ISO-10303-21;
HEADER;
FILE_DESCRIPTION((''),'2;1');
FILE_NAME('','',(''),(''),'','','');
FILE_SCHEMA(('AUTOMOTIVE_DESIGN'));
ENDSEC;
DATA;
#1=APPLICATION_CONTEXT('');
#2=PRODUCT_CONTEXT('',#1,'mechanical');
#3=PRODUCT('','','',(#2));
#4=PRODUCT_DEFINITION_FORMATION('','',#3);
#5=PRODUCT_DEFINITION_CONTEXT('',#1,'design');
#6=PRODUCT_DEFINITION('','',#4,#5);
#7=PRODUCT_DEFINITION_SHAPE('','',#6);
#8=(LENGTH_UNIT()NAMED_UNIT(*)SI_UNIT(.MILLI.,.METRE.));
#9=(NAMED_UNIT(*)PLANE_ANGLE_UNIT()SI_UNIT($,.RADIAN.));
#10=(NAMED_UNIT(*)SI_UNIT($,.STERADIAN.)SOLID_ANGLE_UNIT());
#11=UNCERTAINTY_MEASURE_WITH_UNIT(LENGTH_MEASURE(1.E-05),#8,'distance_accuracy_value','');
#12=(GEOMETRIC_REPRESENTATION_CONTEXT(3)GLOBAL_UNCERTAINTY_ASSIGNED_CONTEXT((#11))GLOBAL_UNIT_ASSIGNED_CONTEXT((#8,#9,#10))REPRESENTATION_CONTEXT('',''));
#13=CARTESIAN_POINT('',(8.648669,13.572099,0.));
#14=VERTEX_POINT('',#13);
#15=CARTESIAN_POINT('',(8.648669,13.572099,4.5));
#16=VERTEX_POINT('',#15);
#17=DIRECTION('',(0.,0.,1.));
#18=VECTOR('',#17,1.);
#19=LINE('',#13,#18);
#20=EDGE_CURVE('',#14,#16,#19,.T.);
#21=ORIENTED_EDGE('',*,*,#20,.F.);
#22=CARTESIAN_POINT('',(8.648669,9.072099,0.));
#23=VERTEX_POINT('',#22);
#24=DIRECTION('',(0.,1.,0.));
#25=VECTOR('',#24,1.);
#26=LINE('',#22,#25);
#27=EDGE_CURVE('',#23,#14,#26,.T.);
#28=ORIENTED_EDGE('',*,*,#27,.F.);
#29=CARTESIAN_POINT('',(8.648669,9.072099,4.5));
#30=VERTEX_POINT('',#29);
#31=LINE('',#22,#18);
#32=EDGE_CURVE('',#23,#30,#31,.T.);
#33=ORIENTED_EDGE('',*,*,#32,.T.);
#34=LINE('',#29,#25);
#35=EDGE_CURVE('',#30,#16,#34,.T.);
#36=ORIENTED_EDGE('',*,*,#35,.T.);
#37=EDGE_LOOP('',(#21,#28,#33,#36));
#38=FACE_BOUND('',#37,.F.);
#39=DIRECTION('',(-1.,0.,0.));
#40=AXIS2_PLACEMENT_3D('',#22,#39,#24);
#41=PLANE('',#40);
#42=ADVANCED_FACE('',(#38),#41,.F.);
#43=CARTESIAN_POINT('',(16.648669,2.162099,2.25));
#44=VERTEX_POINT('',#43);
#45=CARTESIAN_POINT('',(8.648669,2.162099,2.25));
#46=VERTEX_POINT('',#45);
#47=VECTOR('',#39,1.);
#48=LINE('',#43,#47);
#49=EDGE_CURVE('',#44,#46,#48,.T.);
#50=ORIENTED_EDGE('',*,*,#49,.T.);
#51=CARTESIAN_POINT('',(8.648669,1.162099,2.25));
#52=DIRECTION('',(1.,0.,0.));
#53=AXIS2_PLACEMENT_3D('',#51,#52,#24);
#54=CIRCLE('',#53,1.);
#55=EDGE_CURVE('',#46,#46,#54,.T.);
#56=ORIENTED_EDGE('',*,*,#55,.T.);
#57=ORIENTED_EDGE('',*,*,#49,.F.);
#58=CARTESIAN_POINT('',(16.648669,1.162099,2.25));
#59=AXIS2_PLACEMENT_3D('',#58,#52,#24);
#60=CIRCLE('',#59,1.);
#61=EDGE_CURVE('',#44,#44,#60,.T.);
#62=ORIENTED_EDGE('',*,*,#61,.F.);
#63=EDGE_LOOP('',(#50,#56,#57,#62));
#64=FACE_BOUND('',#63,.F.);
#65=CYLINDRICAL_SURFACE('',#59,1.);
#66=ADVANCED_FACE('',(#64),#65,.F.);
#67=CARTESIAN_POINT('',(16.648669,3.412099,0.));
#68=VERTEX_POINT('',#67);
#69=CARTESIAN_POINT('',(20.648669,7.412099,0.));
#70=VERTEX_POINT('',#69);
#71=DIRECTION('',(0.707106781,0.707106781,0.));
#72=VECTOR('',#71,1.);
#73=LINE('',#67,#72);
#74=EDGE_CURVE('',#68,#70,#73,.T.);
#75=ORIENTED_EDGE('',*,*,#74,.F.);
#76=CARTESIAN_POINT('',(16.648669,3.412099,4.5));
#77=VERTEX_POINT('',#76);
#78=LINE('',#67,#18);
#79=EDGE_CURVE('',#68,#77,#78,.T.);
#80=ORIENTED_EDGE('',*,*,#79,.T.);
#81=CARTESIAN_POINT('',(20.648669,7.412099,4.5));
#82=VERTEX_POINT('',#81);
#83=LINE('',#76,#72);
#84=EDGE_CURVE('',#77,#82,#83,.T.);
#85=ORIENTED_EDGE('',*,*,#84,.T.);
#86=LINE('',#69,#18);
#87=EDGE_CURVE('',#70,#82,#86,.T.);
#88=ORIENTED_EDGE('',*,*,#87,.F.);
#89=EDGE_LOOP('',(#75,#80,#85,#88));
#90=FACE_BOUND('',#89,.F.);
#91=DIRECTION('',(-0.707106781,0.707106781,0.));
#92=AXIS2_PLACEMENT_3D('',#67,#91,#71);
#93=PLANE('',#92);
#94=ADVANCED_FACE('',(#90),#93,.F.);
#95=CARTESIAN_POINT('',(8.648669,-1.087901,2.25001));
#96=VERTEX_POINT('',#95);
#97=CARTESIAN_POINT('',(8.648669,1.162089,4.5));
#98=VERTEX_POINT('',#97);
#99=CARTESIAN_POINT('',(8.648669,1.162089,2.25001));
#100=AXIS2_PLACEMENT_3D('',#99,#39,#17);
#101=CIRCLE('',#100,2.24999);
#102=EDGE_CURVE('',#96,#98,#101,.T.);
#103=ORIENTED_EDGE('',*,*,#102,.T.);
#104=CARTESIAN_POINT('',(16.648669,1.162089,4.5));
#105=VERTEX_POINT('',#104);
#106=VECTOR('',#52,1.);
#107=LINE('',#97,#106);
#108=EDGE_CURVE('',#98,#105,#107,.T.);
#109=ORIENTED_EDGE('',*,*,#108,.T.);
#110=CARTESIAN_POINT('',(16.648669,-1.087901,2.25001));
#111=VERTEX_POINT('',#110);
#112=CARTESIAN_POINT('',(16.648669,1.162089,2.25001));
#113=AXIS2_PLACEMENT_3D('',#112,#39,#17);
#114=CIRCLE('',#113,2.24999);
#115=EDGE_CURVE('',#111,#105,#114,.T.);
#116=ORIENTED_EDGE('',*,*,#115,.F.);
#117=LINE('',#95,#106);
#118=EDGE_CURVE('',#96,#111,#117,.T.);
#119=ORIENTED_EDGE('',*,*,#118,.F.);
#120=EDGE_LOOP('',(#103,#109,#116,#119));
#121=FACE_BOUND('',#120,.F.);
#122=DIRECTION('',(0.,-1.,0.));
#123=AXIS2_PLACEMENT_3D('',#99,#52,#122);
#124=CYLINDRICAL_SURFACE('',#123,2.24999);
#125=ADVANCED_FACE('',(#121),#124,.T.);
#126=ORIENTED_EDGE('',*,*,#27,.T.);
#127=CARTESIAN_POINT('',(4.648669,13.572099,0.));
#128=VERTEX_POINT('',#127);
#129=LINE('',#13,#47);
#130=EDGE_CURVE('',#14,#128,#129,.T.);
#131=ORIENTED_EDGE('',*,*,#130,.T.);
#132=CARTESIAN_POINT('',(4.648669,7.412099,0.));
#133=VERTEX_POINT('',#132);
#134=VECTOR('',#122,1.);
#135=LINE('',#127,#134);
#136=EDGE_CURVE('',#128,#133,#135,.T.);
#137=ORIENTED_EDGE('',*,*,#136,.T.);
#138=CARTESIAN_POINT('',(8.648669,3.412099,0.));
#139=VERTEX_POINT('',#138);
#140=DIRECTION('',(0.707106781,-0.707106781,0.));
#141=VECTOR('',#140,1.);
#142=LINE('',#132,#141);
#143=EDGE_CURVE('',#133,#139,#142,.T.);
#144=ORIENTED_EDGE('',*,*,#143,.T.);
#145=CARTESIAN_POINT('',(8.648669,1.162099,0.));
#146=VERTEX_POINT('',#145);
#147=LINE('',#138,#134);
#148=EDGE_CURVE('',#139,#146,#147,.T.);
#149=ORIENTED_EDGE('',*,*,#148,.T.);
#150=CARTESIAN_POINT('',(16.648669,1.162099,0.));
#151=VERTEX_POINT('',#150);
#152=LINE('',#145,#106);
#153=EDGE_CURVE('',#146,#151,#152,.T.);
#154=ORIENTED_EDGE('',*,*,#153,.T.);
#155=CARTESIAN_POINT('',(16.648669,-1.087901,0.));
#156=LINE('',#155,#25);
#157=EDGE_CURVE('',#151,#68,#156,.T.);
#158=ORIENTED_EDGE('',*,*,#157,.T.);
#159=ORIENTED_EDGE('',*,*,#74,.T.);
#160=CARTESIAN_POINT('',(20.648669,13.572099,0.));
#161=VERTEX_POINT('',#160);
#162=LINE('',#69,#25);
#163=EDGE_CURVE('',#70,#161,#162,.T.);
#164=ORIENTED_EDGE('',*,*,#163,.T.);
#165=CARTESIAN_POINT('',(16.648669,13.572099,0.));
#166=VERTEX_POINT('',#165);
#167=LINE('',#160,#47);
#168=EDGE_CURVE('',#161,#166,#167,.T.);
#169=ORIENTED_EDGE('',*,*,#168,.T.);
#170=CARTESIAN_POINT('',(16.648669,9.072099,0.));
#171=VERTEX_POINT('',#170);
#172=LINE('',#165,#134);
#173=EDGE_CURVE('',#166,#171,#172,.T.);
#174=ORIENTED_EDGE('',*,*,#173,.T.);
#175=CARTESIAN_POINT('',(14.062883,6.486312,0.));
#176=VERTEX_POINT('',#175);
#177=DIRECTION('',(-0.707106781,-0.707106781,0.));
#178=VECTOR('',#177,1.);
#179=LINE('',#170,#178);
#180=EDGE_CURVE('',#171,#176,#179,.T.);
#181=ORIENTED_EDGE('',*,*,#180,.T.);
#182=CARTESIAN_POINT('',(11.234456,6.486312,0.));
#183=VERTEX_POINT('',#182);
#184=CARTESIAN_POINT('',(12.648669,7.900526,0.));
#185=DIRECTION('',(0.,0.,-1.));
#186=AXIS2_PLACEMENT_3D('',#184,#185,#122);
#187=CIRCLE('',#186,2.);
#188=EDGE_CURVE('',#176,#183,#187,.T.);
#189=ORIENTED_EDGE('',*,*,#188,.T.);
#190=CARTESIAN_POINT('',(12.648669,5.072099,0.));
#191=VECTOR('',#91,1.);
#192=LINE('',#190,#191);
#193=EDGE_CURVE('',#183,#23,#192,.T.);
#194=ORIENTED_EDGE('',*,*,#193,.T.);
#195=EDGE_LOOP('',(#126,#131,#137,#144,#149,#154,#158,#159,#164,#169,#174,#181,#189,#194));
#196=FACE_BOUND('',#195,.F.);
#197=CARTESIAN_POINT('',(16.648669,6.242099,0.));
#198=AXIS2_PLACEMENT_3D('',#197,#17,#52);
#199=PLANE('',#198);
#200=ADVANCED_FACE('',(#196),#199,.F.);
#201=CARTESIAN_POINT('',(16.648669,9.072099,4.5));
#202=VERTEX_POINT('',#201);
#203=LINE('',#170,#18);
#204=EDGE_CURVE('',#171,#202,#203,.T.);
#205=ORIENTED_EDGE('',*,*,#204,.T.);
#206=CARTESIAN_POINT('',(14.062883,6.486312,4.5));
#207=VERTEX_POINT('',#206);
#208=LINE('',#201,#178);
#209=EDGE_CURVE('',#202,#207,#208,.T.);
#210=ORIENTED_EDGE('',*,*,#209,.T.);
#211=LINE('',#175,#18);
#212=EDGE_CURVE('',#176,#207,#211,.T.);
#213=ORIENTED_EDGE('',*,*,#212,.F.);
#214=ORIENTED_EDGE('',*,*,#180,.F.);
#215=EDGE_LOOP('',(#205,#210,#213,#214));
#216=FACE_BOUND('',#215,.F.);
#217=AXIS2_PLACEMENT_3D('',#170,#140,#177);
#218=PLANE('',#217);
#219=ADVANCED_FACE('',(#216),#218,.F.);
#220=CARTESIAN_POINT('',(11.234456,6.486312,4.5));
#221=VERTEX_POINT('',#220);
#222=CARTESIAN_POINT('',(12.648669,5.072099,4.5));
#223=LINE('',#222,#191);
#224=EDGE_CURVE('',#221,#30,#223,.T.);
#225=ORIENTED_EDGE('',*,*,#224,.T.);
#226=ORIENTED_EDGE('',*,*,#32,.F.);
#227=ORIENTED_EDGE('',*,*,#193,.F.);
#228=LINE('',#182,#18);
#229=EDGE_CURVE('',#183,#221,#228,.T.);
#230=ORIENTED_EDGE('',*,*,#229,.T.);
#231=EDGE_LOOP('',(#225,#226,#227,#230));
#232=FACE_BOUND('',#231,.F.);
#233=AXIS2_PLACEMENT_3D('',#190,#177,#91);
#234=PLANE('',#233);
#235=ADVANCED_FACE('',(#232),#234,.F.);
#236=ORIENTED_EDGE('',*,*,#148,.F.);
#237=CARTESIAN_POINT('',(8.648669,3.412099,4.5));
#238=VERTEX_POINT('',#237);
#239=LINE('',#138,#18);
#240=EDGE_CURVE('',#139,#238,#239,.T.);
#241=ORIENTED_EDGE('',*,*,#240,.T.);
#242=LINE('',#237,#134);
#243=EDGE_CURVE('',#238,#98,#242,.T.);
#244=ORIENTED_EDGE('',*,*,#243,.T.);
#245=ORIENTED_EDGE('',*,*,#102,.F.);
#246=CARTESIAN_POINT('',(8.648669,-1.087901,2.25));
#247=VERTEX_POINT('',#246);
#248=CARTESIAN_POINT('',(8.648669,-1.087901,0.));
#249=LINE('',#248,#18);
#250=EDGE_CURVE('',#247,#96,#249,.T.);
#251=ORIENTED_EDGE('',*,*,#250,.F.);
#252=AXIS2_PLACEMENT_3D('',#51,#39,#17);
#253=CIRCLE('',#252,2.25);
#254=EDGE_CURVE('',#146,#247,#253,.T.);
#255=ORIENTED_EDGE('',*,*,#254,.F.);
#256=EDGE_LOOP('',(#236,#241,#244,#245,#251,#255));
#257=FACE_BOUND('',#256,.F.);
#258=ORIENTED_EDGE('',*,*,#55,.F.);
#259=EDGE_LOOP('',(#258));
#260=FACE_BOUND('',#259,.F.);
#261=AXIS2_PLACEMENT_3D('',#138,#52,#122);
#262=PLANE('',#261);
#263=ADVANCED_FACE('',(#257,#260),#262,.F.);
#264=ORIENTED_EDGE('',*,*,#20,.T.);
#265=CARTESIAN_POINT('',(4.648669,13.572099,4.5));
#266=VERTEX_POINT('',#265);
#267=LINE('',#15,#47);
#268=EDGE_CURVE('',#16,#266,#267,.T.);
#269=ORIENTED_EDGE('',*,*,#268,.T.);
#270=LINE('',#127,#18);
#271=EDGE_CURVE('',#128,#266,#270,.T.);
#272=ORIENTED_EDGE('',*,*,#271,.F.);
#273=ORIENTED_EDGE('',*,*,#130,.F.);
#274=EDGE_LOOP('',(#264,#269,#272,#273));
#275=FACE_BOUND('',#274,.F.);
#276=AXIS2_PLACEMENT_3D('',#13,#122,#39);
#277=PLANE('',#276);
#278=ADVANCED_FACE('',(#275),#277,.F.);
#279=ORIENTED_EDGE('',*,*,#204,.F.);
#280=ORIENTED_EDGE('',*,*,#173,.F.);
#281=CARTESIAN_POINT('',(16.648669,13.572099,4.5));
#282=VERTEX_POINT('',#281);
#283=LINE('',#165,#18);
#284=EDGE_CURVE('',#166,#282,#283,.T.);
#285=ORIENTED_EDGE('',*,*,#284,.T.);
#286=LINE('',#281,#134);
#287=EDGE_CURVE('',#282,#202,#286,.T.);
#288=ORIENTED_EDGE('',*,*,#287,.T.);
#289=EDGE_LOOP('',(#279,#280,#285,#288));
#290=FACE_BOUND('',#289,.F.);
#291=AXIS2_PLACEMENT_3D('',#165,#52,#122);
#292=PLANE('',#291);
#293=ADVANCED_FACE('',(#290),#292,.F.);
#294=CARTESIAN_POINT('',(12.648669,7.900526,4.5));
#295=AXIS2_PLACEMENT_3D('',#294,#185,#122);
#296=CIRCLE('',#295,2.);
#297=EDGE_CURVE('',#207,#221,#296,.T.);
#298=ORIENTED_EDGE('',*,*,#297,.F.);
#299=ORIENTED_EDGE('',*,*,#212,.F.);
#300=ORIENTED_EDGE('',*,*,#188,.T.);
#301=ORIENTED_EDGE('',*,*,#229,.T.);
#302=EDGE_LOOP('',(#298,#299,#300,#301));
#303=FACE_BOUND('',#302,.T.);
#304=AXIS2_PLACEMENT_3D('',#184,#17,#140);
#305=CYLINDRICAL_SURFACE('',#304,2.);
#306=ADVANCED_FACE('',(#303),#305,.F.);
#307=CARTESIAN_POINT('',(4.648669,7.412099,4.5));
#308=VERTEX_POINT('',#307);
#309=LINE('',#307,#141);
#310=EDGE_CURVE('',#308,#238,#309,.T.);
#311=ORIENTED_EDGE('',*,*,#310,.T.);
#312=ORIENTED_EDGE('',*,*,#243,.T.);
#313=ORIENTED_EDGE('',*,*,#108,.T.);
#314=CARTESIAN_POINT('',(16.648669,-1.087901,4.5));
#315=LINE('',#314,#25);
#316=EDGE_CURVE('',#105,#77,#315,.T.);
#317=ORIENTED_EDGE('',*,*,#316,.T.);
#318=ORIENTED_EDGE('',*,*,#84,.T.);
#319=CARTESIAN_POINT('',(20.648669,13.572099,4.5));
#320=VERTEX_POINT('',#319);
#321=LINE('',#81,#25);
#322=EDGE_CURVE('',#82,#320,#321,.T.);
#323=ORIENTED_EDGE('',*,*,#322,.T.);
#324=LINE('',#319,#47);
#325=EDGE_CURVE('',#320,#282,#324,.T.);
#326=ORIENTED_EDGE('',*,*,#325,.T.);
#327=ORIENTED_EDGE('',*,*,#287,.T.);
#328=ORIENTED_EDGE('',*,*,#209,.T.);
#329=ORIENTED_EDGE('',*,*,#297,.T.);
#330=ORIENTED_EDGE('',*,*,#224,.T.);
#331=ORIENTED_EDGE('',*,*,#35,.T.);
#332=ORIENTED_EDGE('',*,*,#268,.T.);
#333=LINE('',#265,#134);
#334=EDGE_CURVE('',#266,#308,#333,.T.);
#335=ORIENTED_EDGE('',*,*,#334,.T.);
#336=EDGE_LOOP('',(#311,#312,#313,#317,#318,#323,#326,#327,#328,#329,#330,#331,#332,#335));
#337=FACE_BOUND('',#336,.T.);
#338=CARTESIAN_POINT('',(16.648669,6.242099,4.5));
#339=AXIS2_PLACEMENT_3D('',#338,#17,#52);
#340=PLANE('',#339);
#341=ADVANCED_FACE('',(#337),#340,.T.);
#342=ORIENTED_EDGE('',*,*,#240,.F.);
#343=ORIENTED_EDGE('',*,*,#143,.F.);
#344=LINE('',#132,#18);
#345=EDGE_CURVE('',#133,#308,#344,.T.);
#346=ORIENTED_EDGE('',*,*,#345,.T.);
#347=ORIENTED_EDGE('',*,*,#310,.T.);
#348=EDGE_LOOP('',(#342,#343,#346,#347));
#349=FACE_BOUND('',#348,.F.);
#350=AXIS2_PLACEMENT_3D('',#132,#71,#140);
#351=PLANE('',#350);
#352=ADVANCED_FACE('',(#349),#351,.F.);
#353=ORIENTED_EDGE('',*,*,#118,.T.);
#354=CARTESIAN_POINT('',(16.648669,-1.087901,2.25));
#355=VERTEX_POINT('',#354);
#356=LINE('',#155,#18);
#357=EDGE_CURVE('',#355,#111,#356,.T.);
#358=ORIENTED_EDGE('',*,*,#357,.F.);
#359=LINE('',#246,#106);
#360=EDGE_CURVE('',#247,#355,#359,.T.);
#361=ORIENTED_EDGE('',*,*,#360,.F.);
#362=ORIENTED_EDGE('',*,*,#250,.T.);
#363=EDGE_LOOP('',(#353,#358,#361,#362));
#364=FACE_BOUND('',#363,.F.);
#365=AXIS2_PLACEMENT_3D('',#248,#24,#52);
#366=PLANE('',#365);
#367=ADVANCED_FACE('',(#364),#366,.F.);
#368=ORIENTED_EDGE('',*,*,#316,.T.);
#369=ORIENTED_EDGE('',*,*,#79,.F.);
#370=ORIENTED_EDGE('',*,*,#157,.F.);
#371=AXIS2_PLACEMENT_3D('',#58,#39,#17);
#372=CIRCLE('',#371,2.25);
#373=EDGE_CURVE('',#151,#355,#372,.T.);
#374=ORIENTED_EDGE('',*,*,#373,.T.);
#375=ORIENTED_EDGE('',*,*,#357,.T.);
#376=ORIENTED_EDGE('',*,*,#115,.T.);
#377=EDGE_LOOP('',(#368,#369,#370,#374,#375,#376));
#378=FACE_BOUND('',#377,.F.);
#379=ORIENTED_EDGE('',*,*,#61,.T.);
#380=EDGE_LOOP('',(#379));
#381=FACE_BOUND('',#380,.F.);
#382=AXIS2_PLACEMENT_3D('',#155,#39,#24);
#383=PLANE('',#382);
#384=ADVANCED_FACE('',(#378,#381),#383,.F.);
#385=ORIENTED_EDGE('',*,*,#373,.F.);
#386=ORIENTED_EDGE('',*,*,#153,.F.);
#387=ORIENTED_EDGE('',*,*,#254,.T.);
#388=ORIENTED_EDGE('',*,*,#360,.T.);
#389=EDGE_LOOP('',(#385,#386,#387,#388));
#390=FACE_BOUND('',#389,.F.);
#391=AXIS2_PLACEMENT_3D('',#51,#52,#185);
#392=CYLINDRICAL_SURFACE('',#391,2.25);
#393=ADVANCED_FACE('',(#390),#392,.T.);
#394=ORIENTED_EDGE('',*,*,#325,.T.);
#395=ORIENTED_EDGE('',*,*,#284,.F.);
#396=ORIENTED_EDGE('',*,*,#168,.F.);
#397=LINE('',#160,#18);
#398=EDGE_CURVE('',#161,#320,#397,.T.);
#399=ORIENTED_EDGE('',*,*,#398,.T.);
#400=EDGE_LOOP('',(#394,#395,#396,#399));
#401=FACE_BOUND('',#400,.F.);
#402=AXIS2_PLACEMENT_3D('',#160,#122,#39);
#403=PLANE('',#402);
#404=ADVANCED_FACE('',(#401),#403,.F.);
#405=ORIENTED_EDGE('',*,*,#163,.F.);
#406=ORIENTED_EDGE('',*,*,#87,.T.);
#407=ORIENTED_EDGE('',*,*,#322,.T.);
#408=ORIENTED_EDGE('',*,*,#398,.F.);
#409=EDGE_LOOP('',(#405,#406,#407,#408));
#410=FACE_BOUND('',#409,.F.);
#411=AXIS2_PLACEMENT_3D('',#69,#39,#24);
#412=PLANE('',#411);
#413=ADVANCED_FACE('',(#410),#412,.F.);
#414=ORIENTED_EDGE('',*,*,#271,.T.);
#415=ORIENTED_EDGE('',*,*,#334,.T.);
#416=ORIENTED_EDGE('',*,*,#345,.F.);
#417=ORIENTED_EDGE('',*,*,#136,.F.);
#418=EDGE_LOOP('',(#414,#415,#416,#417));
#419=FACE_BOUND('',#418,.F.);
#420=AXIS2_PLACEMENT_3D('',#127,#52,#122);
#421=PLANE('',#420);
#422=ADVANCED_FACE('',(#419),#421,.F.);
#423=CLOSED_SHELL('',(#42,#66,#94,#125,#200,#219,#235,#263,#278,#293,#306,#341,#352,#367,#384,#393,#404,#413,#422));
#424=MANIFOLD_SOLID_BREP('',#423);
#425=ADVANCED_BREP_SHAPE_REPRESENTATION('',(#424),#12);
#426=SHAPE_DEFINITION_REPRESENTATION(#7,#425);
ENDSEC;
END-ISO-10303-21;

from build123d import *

# Parameters (mm, degrees)
F1_DEPTH = 4.5
F2_R     = 2
F4_R     = 1
F5_DEPTH = 25
F6_R     = 2.25
F7_R     = 2.24999


# Not quite as in the source:
# - a fillet or chamfer is up to 0.001 mm smaller than in the source, because OpenCascade refuses the exact size


with BuildPart() as f1:
    # F0 (on Top) → F1 (new body)
    with BuildSketch(Plane.XY):
        Polygon((12.6486692298, 5.0720985499), (12.6486692298, -1.0879014501), (16.6486692298, -1.0879014501), (16.6486692298, 3.4120985499), (20.6486692298, 7.4120985499), (20.6486692298, 13.5720985499), (16.6486692298, 13.5720985499), (16.6486692298, 9.0720985499), align=None)
        Polygon((8.6486692298, -1.0879014501), (12.6486692298, -1.0879014501), (12.6486692298, 5.0720985499), (8.6486692298, 9.0720985499), (8.6486692298, 13.5720985499), (4.6486692298, 13.5720985499), (4.6486692298, 7.4120985499), (8.6486692298, 3.4120985499), align=None)
    extrude(amount=F1_DEPTH)

    # F2
    f2_edges = [f1.edges().sort_by_distance(p)[0] for p in [
        (12.648669, 5.072099, 2.25),
    ]]
    fillet(f2_edges, radius=F2_R)

    # F4 (on face) → F5 (cut)
    with BuildSketch(Plane.YZ.offset(16.6486692298)):
        with Locations((1.1620985499, 2.25)):
            Circle(F4_R)
    extrude(amount=-F5_DEPTH, mode=Mode.SUBTRACT)

    # F6
    f6_edges = [f1.edges().sort_by_distance(p)[0] for p in [
        (12.648669, -1.087901, 0),
    ]]
    fillet(f6_edges, radius=F6_R)

    # F7 (radius 2.25 in the source; OpenCascade refuses exactly that, so slightly less here)
    f7_edges = [f1.edges().sort_by_distance(p)[0] for p in [
        (12.648669, -1.087901, 4.5),
    ]]
    fillet(f7_edges, radius=F7_R)


solid = f1.part
